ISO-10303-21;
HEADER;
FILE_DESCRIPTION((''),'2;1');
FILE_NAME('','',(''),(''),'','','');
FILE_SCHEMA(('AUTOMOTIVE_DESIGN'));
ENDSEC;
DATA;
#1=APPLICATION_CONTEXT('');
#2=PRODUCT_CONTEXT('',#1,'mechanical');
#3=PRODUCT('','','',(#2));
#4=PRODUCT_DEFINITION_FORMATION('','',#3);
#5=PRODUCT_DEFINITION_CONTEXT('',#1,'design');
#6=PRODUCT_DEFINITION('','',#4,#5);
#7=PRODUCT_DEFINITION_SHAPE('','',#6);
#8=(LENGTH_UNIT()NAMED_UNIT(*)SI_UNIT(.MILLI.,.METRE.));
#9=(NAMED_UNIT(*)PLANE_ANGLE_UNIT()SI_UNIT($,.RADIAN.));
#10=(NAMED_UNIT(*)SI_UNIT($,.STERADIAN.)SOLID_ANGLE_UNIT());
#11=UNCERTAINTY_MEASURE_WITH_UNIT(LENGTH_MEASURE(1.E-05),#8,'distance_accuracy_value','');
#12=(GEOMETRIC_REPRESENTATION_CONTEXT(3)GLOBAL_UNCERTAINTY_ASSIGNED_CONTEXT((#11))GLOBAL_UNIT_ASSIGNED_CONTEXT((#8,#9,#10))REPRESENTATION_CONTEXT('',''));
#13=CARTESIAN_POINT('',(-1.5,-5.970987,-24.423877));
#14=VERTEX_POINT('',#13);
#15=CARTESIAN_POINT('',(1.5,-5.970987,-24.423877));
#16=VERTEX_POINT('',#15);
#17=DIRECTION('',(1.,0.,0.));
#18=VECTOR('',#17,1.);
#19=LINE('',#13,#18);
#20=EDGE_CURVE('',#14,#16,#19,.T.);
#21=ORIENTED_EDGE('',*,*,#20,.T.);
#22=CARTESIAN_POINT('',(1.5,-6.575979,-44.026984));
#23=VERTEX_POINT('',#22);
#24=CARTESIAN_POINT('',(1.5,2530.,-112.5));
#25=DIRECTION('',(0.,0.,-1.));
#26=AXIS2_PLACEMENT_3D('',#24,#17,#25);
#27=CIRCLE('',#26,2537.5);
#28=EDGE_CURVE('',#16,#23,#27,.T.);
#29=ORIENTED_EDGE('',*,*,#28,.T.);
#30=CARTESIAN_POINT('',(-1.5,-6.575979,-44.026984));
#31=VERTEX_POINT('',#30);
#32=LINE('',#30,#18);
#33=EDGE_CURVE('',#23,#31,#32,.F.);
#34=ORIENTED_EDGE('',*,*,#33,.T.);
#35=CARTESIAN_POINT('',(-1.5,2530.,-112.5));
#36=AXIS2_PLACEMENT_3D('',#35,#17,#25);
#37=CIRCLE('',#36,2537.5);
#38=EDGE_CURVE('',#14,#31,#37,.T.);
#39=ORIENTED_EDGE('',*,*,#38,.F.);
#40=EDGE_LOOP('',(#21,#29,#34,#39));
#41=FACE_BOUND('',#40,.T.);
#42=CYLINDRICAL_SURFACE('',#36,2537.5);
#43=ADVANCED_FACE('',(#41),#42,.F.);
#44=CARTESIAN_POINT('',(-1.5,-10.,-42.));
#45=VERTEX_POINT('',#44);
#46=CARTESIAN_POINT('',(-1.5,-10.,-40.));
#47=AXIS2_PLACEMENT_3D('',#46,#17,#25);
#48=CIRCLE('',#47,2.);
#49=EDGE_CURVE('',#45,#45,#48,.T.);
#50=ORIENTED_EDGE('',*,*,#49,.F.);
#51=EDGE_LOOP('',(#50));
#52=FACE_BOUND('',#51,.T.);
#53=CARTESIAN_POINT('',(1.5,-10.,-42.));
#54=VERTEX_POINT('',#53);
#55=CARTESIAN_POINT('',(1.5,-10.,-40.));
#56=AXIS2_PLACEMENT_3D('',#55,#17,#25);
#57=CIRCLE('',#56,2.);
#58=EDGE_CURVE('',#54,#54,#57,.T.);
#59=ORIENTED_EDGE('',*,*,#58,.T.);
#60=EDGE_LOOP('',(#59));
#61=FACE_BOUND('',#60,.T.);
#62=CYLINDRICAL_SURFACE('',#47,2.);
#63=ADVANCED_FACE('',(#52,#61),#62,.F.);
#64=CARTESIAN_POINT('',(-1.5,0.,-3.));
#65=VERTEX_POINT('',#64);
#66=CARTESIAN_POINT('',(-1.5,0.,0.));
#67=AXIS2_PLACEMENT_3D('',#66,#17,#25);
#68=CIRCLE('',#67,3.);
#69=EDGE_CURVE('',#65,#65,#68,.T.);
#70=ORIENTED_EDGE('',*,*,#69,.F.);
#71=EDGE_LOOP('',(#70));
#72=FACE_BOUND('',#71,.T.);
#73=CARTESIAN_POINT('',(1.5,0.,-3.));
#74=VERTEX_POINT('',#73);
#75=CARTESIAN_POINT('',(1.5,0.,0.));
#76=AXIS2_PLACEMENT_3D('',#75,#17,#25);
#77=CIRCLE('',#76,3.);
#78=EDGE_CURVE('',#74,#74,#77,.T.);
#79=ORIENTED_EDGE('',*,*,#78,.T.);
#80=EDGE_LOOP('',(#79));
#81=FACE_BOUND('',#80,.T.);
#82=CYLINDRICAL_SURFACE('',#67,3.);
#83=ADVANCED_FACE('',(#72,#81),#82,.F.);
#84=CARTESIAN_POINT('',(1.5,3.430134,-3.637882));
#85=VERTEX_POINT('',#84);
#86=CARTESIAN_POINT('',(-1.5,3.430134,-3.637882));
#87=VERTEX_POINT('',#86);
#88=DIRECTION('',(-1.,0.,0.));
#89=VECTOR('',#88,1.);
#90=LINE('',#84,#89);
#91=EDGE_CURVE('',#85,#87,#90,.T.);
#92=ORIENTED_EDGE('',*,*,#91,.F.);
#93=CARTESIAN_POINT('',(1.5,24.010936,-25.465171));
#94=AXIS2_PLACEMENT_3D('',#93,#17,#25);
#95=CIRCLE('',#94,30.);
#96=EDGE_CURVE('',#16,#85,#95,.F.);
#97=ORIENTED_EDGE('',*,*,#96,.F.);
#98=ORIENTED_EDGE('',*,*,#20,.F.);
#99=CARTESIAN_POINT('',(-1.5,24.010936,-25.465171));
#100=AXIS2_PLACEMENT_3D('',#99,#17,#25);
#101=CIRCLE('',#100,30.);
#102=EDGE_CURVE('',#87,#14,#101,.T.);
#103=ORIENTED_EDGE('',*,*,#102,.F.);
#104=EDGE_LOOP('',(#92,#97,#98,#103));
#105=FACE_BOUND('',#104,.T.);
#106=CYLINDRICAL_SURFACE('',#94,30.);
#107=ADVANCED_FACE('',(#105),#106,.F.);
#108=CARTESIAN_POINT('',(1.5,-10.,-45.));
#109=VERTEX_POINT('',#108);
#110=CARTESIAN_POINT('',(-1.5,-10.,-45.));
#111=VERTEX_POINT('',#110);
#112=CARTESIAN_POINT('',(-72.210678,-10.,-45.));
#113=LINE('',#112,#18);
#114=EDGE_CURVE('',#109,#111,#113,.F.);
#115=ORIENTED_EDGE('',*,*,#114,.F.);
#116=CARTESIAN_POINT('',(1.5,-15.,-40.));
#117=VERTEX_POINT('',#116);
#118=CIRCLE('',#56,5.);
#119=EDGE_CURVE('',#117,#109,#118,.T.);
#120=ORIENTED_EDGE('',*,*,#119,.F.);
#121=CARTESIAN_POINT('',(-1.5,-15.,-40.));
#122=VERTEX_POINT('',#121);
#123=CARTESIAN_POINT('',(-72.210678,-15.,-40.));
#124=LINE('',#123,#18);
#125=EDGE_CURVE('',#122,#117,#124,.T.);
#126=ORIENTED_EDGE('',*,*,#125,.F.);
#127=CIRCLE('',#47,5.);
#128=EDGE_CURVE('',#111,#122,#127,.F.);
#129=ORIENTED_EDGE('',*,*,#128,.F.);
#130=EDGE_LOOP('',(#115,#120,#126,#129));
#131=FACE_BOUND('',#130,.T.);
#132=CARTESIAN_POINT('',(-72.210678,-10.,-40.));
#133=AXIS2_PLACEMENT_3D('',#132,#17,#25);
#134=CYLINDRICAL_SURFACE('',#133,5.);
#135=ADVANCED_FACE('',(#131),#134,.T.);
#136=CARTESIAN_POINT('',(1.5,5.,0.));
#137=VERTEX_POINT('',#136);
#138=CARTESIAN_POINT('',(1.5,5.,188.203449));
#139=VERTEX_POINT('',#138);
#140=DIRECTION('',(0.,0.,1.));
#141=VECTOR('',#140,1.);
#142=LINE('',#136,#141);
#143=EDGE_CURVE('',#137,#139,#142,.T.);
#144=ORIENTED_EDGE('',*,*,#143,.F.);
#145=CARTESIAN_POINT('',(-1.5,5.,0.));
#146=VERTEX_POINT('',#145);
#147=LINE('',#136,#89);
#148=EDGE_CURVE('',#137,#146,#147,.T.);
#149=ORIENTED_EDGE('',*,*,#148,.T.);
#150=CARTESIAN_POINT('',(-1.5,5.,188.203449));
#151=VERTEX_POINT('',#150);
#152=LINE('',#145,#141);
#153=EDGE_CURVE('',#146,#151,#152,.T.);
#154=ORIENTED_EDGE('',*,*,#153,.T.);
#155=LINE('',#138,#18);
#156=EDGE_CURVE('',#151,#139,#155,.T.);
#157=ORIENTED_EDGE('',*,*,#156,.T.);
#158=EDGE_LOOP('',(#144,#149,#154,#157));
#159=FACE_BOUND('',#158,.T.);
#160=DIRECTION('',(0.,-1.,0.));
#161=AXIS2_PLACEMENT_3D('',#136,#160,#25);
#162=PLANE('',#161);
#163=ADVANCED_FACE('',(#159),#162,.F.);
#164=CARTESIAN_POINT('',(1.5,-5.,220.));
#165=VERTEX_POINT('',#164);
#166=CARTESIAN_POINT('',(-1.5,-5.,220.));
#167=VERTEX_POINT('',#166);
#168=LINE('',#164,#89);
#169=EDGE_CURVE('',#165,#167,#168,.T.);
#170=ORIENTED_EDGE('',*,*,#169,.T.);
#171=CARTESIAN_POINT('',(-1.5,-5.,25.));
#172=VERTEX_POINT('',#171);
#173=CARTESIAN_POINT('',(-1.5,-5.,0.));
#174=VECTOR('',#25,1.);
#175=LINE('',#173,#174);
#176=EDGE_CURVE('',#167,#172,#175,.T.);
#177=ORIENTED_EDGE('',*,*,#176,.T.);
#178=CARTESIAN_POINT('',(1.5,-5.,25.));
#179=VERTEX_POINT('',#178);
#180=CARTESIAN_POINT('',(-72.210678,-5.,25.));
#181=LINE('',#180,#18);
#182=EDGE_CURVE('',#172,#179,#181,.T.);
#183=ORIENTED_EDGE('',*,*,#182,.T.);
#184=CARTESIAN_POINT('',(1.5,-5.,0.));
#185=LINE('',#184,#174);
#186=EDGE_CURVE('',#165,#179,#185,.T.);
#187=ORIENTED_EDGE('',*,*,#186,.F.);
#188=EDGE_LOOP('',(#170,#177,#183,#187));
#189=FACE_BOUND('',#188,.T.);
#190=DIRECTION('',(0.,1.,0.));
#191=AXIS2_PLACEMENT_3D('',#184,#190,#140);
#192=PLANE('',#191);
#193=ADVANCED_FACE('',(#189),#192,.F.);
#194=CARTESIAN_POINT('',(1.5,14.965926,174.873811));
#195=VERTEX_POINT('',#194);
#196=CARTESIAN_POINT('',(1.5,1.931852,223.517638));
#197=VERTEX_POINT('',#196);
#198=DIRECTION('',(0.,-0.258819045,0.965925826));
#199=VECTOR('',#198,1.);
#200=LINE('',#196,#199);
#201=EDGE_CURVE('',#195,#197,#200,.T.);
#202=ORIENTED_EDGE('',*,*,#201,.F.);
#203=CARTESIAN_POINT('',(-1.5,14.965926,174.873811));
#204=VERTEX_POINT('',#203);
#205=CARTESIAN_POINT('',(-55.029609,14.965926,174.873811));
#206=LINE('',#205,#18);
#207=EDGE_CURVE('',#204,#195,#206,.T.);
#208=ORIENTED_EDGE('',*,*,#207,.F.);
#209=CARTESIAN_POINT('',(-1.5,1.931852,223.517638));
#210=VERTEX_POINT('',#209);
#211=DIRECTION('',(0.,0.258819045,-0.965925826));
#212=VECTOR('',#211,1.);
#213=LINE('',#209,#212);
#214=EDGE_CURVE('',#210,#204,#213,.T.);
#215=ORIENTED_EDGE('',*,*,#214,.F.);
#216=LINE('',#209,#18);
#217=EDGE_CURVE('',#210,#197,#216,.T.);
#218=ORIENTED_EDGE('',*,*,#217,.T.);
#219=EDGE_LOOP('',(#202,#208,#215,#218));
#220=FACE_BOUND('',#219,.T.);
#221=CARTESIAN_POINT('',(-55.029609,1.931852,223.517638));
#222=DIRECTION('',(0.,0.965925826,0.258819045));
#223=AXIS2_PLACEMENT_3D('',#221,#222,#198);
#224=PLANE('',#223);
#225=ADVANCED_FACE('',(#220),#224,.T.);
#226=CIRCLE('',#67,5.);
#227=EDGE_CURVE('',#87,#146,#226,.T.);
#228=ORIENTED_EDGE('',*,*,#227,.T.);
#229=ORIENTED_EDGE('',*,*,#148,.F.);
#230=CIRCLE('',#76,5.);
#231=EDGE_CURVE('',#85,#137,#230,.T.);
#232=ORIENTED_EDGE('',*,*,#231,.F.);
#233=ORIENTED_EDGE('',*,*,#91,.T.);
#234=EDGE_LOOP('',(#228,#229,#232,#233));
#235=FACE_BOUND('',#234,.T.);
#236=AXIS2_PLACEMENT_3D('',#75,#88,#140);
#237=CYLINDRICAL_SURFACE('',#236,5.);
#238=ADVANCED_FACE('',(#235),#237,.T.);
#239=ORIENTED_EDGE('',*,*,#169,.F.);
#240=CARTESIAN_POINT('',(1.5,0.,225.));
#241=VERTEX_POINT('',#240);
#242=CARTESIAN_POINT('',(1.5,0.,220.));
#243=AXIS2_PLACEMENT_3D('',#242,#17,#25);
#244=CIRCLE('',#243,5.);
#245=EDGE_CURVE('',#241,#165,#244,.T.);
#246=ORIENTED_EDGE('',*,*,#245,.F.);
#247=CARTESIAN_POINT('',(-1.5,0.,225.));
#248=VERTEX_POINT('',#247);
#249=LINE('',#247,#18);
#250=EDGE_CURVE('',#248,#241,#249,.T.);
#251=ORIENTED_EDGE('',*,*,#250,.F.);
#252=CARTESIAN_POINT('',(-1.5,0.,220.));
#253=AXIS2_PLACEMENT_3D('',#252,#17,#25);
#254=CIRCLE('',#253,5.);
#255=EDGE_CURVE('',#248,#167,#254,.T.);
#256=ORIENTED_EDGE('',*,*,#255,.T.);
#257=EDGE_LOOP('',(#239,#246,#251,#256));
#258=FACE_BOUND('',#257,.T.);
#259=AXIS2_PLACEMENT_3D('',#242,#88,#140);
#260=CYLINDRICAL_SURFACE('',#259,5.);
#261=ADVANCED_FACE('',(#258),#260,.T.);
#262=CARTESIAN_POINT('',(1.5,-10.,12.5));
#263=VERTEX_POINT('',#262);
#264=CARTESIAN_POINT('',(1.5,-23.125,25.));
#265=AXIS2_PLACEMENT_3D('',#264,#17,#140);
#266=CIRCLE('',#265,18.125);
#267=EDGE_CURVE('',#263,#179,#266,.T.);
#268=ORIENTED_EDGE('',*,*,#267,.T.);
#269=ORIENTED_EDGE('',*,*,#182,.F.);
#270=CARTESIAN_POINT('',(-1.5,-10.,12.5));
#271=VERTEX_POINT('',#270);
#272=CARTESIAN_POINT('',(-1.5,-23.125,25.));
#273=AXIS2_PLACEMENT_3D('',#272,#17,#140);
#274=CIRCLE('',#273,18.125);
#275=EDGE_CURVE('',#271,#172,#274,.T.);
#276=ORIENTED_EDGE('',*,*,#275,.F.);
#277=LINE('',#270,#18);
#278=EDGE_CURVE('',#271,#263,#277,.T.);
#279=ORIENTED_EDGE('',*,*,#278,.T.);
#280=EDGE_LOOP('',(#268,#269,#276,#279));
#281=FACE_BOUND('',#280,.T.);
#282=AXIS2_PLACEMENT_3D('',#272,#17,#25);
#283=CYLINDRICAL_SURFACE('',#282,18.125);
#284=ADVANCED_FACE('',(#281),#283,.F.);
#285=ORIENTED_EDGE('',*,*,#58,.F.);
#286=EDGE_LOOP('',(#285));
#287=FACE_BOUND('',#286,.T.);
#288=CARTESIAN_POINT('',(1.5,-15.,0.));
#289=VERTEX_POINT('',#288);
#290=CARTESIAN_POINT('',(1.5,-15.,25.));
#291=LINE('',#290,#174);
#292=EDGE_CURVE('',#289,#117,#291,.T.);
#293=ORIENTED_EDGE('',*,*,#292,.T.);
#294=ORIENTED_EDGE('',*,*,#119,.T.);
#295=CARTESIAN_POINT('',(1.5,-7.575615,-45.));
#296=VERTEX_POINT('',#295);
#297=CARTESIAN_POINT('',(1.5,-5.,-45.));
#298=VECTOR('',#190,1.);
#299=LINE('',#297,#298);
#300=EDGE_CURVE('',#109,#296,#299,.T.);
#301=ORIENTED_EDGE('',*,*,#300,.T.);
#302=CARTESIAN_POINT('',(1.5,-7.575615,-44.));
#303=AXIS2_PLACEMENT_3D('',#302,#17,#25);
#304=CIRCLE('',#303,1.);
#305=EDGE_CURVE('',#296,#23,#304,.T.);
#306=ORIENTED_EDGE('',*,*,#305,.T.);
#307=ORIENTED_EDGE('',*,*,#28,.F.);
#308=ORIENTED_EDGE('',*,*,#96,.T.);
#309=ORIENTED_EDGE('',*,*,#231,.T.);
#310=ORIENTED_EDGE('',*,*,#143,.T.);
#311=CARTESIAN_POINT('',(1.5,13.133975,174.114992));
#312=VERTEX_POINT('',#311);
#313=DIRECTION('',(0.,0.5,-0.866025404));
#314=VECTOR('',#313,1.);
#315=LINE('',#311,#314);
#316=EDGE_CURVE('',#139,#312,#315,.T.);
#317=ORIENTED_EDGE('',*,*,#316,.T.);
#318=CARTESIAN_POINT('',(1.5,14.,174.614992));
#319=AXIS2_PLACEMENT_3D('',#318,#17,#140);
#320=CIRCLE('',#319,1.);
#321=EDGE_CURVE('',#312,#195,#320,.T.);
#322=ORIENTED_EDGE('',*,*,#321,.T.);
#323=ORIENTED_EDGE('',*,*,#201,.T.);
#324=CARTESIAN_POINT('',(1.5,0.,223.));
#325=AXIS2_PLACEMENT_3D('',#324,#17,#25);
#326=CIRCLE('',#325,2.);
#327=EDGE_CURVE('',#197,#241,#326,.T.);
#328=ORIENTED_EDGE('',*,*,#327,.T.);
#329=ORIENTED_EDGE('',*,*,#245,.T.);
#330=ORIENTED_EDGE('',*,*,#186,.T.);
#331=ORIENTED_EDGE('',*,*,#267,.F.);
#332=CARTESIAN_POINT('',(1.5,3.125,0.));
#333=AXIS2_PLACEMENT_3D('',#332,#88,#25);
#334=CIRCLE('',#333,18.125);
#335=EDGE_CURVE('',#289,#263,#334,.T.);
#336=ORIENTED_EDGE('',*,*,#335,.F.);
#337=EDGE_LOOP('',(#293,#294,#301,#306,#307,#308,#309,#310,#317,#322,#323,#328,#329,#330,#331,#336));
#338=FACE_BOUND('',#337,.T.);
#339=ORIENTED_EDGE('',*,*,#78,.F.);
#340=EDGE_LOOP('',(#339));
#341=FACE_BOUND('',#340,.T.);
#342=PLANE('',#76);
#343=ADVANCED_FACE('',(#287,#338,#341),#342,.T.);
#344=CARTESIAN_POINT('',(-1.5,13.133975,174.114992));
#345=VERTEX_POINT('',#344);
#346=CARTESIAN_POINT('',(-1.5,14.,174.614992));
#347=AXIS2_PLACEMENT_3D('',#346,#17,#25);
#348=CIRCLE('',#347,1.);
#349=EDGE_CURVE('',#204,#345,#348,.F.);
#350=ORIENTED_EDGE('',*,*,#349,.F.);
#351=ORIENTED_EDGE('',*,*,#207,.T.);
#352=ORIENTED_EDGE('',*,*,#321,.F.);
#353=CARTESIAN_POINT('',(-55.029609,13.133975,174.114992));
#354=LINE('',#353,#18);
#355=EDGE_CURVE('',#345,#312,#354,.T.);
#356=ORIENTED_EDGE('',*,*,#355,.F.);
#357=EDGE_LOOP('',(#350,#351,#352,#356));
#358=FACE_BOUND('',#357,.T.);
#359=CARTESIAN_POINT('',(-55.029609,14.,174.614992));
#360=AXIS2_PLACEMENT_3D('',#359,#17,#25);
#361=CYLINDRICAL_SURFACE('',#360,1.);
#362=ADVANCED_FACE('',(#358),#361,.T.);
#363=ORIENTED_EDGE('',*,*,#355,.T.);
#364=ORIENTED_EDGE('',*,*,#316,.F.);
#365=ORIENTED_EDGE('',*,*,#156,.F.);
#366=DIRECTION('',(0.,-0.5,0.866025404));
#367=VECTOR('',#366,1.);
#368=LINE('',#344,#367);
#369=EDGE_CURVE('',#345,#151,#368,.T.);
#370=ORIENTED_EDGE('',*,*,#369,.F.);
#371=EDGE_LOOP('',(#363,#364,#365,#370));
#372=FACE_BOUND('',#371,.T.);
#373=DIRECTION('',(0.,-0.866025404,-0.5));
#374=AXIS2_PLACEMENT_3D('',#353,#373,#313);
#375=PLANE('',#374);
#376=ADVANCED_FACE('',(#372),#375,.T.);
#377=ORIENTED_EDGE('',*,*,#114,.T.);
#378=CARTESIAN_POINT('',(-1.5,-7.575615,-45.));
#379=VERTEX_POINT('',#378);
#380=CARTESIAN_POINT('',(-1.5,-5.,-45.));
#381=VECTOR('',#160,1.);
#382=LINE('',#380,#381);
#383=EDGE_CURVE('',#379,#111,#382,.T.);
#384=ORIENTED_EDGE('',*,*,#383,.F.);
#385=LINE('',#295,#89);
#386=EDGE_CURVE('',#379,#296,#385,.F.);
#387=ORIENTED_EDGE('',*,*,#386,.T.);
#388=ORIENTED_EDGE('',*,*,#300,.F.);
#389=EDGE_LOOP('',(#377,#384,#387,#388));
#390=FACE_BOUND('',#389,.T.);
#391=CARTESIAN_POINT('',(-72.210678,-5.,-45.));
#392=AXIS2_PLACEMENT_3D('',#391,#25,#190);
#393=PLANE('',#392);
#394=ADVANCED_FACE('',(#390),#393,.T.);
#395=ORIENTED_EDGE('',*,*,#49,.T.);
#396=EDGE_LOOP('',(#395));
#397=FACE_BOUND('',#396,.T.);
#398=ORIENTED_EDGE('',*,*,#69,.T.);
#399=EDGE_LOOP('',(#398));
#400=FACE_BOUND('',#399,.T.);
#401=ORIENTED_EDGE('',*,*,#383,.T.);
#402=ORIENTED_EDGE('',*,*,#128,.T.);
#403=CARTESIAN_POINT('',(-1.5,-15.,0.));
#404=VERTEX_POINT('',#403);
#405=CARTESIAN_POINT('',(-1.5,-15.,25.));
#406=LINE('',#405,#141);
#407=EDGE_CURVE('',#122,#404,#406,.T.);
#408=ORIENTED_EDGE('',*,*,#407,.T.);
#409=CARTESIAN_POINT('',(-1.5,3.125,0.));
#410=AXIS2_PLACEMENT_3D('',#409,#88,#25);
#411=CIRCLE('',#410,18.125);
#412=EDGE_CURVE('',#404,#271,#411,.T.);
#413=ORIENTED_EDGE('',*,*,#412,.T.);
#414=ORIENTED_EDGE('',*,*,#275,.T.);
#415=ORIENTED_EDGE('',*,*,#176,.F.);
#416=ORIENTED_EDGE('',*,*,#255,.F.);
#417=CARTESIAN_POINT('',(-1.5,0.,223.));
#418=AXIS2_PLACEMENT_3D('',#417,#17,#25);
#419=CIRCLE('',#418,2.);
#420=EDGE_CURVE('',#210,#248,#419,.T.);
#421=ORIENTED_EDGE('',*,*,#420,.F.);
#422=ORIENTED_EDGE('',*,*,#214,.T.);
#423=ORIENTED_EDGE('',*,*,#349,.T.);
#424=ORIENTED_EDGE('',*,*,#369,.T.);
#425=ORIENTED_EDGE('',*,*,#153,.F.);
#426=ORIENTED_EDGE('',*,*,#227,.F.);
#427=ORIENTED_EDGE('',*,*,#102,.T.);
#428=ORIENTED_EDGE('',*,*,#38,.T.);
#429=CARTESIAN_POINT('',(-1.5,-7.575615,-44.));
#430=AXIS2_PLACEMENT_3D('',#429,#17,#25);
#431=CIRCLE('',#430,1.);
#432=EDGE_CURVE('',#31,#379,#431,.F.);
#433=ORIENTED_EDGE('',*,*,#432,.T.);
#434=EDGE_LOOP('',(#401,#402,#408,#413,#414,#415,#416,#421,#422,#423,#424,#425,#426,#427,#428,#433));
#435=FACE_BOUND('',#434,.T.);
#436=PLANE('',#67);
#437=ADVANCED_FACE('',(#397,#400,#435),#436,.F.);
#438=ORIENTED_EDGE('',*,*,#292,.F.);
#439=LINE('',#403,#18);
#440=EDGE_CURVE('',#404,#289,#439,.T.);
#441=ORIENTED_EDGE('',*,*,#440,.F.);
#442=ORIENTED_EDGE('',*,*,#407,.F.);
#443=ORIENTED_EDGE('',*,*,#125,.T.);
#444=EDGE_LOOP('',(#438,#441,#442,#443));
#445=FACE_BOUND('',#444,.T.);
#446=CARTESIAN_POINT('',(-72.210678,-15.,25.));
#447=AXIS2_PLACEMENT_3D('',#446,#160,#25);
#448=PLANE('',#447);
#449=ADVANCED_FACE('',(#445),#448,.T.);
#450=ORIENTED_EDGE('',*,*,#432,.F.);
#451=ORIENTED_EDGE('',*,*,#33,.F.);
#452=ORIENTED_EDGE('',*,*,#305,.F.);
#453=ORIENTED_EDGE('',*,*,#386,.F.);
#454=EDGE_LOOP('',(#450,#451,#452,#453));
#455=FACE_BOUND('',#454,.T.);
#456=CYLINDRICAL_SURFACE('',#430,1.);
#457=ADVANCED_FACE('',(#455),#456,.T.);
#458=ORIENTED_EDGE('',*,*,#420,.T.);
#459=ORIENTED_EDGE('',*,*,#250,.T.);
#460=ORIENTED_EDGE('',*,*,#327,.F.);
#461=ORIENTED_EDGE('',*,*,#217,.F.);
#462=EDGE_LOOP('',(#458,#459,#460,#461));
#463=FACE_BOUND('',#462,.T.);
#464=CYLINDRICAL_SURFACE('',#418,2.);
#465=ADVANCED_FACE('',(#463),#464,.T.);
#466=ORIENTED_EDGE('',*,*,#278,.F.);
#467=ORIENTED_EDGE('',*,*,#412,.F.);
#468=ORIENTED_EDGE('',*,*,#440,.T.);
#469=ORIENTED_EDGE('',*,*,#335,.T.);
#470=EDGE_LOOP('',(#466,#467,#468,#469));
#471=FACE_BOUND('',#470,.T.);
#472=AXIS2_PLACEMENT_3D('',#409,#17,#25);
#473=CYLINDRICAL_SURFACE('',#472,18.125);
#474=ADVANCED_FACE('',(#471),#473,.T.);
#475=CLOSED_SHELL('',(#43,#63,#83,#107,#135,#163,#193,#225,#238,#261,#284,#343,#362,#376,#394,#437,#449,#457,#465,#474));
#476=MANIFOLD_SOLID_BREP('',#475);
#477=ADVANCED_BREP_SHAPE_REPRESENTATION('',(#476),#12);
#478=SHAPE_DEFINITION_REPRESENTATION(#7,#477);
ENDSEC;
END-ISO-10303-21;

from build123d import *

# Parameters (mm, degrees)
EXTRUDE_1_DEPTH     = 1.5
EXTRUDE_2_DEPTH     = 3
CUT_EXTRUDE_1_DEPTH = 226.519400496
SKETCH_4_W          = 70
SKETCH_4_H          = 10
EXTRUDE_3_DEPTH     = 3
CUT_EXTRUDE_2_DEPTH = 226.519400496
FILLET_1_R          = 5
FILLET_START        = -1.5
FILLET_2_DEPTH      = 3
FILLET_3_R          = 1
CUT_EXTRUDE_3_DEPTH = 226.519400496
SKETCH_7_R          = 3
CUT_EXTRUDE_4_DEPTH = 226.519400496
SKETCH_8_R          = 2
CUT_EXTRUDE_5_DEPTH = 226.519400496


with BuildPart() as part:
    # ｽｹｯﾁ1 → ﾎﾞｽ - 押し出し1 (new, symmetric)
    with BuildSketch(Plane(origin=(0, 0, 0), x_dir=(0, 0, -1), z_dir=(1, 0, 0))):
        with BuildLine():
            Line((0, -5), (-220, -5))
            ThreePointArc((-220, -5), (-225, 0), (-220, 5))
            Line((-220, 5), (0, 5))
            ThreePointArc((0, 5), (5, 0), (0, -5))
        make_face()
    extrude(amount=EXTRUDE_1_DEPTH, both=True)

    # ｽｹｯﾁ2 → ﾎﾞｽ - 押し出し2 (add)
    with BuildSketch(Plane(origin=(1.5, 0, 0), x_dir=(0, 0, -1), z_dir=(1, 0, 0))):
        with BuildLine():
            Line((-223.51763809, 1.931851653), (-174.873811044, 14.965925826))
            ThreePointArc((-174.873811044, 14.965925826), (-173.691112467, 14.382683432), (-174.114991999, 13.133974596))
            Line((-174.114991999, 13.133974596), (-196.863703305, 0))
            Line((-196.863703305, 0), (-225, 0))
            ThreePointArc((-225, 0), (-224.586706681, 1.217522858), (-223.51763809, 1.931851653))
        make_face()
    extrude(amount=-EXTRUDE_2_DEPTH)

    # ｽｹｯﾁ3 → ｶｯﾄ - 押し出し1 (cut, through all)
    with BuildSketch(Plane(origin=(1.5, 0, 0), x_dir=(0, 0, -1), z_dir=(1, 0, 0))):
        with BuildLine():
            Line((-223.51763809, 1.931851653), (-212.067152572, 5))
            Line((-212.067152572, 5), (-220, 5))
            ThreePointArc((-220, 5), (-223.535533906, 3.535533906), (-225, 0))
            ThreePointArc((-225, 0), (-224.586706681, 1.217522858), (-223.51763809, 1.931851653))
        make_face()
    extrude(amount=-CUT_EXTRUDE_1_DEPTH, mode=Mode.SUBTRACT)

    # ｽｹｯﾁ4 → ﾎﾞｽ - 押し出し3 (add)
    with BuildSketch(Plane(origin=(1.5, 0, 0), x_dir=(0, 0, -1), z_dir=(1, 0, 0))):
        with Locations((10, -10)):
            Rectangle(SKETCH_4_W, SKETCH_4_H)
    extrude(amount=-EXTRUDE_3_DEPTH)

    # ｽｹｯﾁ5 → ｶｯﾄ - 押し出し2 (cut, through all)
    with BuildSketch(Plane(origin=(1.5, 0, 0), x_dir=(0, 0, -1), z_dir=(1, 0, 0))):
        with BuildLine():
            ThreePointArc((-0.222112537, -4.995064166), (22.385361516, -5.899367469), (45, -6.602057872))
            Line((45, -6.602057872), (45, -5))
            Line((45, -5), (0, -5))
            ThreePointArc((0, -5), (-0.111083686, -4.998765889), (-0.222112537, -4.995064166))
        make_face()
    extrude(amount=-CUT_EXTRUDE_2_DEPTH, mode=Mode.SUBTRACT)

    # ﾌｨﾚｯﾄ1
    fillet_1_edges = [part.edges().sort_by_distance(p)[0] for p in [
        (0, -15, -45),
    ]]
    fillet(fillet_1_edges, radius=FILLET_1_R)

    # ﾌｨﾚｯﾄ2: read off the stored shape, not the designer's step
    # ﾌｨﾚｯﾄ2 outline → ﾌｨﾚｯﾄ2 (add)
    with BuildSketch(Plane.YZ.offset(FILLET_START)):
        with BuildLine():
            ThreePointArc((-5.97098694, -24.423877243), (-3.3233227, -13.102392567), (3.430133723, -3.637881615))
            ThreePointArc((3.430133723, -3.637881615), (-2.082580259, -4.54564181), (-4.995064166, 0.222112537))
            ThreePointArc((-4.995064166, 0.222112537), (-5.512971584, -12.099696561), (-5.97098694, -24.423877243))
        make_face()
    extrude(amount=FILLET_2_DEPTH)

    # ﾌｨﾚｯﾄ3
    fillet_3_edges = [part.edges().sort_by_distance(p)[0] for p in [
        (0, -6.602057872, -45),
    ]]
    fillet(fillet_3_edges, radius=FILLET_3_R)

    # ｽｹｯﾁ6 → ｶｯﾄ - 押し出し3 (cut, through all)
    with BuildSketch(Plane(origin=(1.5, 0, 0), x_dir=(0, 0, -1), z_dir=(1, 0, 0))):
        with BuildLine():
            Line((0, -15), (-25, -15))
            Line((-25, -15), (-25, -5))
            ThreePointArc((-25, -5), (-18.268543991, -6.296359978), (-12.5, -10))
            ThreePointArc((-12.5, -10), (-6.731456009, -13.703640022), (0, -15))
        make_face()
    extrude(amount=-CUT_EXTRUDE_3_DEPTH, mode=Mode.SUBTRACT)

    # ｽｹｯﾁ7 → ｶｯﾄ - 押し出し4 (cut, through all)
    with BuildSketch(Plane(origin=(1.5, 0, 0), x_dir=(0, 0, -1), z_dir=(1, 0, 0))):
        Circle(SKETCH_7_R)
    extrude(amount=-CUT_EXTRUDE_4_DEPTH, mode=Mode.SUBTRACT)

    # ｽｹｯﾁ8 → ｶｯﾄ - 押し出し5 (cut, through all)
    with BuildSketch(Plane(origin=(1.5, 0, 0), x_dir=(0, 0, -1), z_dir=(1, 0, 0))):
        with Locations((40, -10)):
            Circle(SKETCH_8_R)
    extrude(amount=-CUT_EXTRUDE_5_DEPTH, mode=Mode.SUBTRACT)


solid = part.part
